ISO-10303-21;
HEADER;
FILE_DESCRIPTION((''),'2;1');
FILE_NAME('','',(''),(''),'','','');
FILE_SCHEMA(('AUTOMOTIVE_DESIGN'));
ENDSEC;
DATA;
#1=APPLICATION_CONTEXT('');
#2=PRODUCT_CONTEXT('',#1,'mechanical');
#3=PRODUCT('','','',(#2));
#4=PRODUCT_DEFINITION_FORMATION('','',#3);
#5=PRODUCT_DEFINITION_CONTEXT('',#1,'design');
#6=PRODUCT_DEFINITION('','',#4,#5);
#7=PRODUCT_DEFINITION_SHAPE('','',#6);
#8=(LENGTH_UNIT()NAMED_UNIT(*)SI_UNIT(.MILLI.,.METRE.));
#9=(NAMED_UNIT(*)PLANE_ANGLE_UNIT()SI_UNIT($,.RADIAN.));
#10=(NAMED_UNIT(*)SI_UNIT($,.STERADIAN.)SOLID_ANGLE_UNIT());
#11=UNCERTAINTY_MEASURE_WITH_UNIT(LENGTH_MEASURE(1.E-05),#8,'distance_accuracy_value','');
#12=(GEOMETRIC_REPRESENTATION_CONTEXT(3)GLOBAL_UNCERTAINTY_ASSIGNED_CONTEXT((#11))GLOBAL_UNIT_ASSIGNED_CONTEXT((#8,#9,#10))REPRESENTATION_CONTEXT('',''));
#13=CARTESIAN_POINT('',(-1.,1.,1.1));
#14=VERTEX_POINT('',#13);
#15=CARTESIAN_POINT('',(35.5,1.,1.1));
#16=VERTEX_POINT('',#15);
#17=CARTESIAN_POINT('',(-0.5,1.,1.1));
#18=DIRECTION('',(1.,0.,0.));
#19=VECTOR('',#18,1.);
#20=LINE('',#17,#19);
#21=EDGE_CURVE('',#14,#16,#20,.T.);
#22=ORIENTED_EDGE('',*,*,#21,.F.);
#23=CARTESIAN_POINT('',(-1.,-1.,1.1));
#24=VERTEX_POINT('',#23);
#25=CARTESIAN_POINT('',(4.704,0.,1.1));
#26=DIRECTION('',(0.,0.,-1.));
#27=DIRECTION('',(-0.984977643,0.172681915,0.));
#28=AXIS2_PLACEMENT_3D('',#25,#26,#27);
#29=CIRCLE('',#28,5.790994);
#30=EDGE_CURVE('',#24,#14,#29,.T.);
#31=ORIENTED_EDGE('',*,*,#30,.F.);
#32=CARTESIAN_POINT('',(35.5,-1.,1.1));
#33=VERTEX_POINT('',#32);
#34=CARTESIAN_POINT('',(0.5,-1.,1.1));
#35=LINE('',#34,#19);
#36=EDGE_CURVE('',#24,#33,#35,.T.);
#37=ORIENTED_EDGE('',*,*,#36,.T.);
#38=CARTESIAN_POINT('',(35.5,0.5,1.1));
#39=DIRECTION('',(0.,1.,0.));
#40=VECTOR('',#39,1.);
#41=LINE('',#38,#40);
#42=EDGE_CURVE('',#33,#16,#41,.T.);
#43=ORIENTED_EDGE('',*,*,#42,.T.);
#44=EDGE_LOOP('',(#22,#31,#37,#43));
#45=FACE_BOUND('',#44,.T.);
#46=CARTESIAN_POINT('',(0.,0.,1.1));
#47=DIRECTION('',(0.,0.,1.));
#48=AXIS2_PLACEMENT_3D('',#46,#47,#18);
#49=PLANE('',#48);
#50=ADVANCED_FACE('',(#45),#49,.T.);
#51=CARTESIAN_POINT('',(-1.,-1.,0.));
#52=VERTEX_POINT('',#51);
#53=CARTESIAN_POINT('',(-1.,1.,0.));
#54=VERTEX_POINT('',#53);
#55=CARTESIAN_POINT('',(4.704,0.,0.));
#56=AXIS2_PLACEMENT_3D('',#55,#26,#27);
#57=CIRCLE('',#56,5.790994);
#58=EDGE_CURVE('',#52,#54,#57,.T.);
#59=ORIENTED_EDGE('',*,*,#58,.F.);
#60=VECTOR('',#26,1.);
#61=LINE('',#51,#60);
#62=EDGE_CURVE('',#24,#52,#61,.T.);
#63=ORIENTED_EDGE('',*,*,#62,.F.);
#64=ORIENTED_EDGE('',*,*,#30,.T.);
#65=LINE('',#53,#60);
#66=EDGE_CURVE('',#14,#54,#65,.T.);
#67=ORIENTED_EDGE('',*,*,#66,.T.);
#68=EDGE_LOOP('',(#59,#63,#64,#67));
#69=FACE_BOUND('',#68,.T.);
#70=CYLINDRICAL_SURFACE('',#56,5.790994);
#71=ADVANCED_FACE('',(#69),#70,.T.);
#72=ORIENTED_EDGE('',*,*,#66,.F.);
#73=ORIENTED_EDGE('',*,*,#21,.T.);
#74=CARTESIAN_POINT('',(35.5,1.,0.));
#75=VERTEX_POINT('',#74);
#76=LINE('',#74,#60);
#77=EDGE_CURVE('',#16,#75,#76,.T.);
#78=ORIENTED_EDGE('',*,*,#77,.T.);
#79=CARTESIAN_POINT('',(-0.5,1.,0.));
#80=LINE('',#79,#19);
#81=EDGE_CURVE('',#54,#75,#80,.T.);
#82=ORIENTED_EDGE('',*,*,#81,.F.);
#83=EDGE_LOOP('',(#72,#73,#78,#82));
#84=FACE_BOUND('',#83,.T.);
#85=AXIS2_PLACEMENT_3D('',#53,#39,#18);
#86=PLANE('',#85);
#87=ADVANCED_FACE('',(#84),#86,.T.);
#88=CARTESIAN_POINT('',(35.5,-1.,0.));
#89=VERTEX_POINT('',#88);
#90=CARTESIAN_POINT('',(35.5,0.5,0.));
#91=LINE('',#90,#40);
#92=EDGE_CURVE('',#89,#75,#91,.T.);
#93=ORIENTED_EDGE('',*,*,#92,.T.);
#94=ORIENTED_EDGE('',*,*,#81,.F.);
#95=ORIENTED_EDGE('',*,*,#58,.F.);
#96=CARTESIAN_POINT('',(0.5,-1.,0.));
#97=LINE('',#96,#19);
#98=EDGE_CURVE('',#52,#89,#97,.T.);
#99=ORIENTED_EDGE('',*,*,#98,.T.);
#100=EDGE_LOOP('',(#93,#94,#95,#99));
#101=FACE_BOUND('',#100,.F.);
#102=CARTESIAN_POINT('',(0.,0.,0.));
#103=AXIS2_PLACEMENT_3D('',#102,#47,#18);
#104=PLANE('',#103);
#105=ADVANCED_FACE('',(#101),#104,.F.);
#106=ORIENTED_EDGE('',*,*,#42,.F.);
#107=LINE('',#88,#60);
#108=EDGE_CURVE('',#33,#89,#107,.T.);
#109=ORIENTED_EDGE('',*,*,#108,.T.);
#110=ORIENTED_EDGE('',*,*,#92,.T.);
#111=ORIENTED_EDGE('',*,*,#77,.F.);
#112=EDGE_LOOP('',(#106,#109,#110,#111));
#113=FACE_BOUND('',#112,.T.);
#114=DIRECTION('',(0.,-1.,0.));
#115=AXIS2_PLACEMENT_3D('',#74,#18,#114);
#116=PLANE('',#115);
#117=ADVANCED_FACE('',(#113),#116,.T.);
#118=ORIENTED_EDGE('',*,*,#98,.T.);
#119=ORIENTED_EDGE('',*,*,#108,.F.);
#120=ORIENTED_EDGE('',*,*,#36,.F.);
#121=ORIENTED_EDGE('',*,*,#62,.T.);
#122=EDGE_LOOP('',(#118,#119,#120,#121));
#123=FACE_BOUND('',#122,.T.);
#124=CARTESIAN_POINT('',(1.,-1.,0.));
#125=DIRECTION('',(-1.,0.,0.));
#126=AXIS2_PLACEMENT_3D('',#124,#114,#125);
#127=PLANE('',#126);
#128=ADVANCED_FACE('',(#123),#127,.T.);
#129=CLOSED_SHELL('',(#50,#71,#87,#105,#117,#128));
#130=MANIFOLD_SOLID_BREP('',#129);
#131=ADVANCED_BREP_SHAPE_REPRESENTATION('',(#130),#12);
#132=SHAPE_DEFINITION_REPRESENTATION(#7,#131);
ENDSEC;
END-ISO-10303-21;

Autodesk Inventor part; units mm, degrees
ref_plane "YZ Plane" through (0, 0, 0) normal (1, 0, 0) x (0, 1, 0)
ref_plane "XZ Plane" through (0, 0, 0) normal (0, 1, 0) x (-1, 0, 0)
ref_plane "XY Plane" through (0, 0, 0) normal (0, 0, 1) x (1, 0, 0)
sketch "Sketch1" plane through (0, 0, 0) normal (0, 0, 1) x (1, 0, 0)
  line L0 (-2.2452, 0) -> (5.8622, 0) projected
  line L1 (-1, 1) -> (1, 1)
  line L2 (1, 1) -> (1, -1)
  line L3 (1, -1) -> (-1, -1)
  line L4 (-1, -1) -> (-1, 1)
  line L5 (-1, 1) -> (1, -1) construction
  line L6 (1, 1) -> (-1, -1) construction
  arc A0 (-1, 1) -> (-1, -1) centre (4.704, 0) ccw
  point P0 (0, 0)
  dimension "d11" = 2
  dimension "d12" = 2
extrude "Extrusion2" add sketch "Sketch1" along normal blind 1.1
move faces "Move1" translate (34.5, 0, 0) faces at (1, 0.3333, 0.3667)
properties part number "pin_interconnect"
